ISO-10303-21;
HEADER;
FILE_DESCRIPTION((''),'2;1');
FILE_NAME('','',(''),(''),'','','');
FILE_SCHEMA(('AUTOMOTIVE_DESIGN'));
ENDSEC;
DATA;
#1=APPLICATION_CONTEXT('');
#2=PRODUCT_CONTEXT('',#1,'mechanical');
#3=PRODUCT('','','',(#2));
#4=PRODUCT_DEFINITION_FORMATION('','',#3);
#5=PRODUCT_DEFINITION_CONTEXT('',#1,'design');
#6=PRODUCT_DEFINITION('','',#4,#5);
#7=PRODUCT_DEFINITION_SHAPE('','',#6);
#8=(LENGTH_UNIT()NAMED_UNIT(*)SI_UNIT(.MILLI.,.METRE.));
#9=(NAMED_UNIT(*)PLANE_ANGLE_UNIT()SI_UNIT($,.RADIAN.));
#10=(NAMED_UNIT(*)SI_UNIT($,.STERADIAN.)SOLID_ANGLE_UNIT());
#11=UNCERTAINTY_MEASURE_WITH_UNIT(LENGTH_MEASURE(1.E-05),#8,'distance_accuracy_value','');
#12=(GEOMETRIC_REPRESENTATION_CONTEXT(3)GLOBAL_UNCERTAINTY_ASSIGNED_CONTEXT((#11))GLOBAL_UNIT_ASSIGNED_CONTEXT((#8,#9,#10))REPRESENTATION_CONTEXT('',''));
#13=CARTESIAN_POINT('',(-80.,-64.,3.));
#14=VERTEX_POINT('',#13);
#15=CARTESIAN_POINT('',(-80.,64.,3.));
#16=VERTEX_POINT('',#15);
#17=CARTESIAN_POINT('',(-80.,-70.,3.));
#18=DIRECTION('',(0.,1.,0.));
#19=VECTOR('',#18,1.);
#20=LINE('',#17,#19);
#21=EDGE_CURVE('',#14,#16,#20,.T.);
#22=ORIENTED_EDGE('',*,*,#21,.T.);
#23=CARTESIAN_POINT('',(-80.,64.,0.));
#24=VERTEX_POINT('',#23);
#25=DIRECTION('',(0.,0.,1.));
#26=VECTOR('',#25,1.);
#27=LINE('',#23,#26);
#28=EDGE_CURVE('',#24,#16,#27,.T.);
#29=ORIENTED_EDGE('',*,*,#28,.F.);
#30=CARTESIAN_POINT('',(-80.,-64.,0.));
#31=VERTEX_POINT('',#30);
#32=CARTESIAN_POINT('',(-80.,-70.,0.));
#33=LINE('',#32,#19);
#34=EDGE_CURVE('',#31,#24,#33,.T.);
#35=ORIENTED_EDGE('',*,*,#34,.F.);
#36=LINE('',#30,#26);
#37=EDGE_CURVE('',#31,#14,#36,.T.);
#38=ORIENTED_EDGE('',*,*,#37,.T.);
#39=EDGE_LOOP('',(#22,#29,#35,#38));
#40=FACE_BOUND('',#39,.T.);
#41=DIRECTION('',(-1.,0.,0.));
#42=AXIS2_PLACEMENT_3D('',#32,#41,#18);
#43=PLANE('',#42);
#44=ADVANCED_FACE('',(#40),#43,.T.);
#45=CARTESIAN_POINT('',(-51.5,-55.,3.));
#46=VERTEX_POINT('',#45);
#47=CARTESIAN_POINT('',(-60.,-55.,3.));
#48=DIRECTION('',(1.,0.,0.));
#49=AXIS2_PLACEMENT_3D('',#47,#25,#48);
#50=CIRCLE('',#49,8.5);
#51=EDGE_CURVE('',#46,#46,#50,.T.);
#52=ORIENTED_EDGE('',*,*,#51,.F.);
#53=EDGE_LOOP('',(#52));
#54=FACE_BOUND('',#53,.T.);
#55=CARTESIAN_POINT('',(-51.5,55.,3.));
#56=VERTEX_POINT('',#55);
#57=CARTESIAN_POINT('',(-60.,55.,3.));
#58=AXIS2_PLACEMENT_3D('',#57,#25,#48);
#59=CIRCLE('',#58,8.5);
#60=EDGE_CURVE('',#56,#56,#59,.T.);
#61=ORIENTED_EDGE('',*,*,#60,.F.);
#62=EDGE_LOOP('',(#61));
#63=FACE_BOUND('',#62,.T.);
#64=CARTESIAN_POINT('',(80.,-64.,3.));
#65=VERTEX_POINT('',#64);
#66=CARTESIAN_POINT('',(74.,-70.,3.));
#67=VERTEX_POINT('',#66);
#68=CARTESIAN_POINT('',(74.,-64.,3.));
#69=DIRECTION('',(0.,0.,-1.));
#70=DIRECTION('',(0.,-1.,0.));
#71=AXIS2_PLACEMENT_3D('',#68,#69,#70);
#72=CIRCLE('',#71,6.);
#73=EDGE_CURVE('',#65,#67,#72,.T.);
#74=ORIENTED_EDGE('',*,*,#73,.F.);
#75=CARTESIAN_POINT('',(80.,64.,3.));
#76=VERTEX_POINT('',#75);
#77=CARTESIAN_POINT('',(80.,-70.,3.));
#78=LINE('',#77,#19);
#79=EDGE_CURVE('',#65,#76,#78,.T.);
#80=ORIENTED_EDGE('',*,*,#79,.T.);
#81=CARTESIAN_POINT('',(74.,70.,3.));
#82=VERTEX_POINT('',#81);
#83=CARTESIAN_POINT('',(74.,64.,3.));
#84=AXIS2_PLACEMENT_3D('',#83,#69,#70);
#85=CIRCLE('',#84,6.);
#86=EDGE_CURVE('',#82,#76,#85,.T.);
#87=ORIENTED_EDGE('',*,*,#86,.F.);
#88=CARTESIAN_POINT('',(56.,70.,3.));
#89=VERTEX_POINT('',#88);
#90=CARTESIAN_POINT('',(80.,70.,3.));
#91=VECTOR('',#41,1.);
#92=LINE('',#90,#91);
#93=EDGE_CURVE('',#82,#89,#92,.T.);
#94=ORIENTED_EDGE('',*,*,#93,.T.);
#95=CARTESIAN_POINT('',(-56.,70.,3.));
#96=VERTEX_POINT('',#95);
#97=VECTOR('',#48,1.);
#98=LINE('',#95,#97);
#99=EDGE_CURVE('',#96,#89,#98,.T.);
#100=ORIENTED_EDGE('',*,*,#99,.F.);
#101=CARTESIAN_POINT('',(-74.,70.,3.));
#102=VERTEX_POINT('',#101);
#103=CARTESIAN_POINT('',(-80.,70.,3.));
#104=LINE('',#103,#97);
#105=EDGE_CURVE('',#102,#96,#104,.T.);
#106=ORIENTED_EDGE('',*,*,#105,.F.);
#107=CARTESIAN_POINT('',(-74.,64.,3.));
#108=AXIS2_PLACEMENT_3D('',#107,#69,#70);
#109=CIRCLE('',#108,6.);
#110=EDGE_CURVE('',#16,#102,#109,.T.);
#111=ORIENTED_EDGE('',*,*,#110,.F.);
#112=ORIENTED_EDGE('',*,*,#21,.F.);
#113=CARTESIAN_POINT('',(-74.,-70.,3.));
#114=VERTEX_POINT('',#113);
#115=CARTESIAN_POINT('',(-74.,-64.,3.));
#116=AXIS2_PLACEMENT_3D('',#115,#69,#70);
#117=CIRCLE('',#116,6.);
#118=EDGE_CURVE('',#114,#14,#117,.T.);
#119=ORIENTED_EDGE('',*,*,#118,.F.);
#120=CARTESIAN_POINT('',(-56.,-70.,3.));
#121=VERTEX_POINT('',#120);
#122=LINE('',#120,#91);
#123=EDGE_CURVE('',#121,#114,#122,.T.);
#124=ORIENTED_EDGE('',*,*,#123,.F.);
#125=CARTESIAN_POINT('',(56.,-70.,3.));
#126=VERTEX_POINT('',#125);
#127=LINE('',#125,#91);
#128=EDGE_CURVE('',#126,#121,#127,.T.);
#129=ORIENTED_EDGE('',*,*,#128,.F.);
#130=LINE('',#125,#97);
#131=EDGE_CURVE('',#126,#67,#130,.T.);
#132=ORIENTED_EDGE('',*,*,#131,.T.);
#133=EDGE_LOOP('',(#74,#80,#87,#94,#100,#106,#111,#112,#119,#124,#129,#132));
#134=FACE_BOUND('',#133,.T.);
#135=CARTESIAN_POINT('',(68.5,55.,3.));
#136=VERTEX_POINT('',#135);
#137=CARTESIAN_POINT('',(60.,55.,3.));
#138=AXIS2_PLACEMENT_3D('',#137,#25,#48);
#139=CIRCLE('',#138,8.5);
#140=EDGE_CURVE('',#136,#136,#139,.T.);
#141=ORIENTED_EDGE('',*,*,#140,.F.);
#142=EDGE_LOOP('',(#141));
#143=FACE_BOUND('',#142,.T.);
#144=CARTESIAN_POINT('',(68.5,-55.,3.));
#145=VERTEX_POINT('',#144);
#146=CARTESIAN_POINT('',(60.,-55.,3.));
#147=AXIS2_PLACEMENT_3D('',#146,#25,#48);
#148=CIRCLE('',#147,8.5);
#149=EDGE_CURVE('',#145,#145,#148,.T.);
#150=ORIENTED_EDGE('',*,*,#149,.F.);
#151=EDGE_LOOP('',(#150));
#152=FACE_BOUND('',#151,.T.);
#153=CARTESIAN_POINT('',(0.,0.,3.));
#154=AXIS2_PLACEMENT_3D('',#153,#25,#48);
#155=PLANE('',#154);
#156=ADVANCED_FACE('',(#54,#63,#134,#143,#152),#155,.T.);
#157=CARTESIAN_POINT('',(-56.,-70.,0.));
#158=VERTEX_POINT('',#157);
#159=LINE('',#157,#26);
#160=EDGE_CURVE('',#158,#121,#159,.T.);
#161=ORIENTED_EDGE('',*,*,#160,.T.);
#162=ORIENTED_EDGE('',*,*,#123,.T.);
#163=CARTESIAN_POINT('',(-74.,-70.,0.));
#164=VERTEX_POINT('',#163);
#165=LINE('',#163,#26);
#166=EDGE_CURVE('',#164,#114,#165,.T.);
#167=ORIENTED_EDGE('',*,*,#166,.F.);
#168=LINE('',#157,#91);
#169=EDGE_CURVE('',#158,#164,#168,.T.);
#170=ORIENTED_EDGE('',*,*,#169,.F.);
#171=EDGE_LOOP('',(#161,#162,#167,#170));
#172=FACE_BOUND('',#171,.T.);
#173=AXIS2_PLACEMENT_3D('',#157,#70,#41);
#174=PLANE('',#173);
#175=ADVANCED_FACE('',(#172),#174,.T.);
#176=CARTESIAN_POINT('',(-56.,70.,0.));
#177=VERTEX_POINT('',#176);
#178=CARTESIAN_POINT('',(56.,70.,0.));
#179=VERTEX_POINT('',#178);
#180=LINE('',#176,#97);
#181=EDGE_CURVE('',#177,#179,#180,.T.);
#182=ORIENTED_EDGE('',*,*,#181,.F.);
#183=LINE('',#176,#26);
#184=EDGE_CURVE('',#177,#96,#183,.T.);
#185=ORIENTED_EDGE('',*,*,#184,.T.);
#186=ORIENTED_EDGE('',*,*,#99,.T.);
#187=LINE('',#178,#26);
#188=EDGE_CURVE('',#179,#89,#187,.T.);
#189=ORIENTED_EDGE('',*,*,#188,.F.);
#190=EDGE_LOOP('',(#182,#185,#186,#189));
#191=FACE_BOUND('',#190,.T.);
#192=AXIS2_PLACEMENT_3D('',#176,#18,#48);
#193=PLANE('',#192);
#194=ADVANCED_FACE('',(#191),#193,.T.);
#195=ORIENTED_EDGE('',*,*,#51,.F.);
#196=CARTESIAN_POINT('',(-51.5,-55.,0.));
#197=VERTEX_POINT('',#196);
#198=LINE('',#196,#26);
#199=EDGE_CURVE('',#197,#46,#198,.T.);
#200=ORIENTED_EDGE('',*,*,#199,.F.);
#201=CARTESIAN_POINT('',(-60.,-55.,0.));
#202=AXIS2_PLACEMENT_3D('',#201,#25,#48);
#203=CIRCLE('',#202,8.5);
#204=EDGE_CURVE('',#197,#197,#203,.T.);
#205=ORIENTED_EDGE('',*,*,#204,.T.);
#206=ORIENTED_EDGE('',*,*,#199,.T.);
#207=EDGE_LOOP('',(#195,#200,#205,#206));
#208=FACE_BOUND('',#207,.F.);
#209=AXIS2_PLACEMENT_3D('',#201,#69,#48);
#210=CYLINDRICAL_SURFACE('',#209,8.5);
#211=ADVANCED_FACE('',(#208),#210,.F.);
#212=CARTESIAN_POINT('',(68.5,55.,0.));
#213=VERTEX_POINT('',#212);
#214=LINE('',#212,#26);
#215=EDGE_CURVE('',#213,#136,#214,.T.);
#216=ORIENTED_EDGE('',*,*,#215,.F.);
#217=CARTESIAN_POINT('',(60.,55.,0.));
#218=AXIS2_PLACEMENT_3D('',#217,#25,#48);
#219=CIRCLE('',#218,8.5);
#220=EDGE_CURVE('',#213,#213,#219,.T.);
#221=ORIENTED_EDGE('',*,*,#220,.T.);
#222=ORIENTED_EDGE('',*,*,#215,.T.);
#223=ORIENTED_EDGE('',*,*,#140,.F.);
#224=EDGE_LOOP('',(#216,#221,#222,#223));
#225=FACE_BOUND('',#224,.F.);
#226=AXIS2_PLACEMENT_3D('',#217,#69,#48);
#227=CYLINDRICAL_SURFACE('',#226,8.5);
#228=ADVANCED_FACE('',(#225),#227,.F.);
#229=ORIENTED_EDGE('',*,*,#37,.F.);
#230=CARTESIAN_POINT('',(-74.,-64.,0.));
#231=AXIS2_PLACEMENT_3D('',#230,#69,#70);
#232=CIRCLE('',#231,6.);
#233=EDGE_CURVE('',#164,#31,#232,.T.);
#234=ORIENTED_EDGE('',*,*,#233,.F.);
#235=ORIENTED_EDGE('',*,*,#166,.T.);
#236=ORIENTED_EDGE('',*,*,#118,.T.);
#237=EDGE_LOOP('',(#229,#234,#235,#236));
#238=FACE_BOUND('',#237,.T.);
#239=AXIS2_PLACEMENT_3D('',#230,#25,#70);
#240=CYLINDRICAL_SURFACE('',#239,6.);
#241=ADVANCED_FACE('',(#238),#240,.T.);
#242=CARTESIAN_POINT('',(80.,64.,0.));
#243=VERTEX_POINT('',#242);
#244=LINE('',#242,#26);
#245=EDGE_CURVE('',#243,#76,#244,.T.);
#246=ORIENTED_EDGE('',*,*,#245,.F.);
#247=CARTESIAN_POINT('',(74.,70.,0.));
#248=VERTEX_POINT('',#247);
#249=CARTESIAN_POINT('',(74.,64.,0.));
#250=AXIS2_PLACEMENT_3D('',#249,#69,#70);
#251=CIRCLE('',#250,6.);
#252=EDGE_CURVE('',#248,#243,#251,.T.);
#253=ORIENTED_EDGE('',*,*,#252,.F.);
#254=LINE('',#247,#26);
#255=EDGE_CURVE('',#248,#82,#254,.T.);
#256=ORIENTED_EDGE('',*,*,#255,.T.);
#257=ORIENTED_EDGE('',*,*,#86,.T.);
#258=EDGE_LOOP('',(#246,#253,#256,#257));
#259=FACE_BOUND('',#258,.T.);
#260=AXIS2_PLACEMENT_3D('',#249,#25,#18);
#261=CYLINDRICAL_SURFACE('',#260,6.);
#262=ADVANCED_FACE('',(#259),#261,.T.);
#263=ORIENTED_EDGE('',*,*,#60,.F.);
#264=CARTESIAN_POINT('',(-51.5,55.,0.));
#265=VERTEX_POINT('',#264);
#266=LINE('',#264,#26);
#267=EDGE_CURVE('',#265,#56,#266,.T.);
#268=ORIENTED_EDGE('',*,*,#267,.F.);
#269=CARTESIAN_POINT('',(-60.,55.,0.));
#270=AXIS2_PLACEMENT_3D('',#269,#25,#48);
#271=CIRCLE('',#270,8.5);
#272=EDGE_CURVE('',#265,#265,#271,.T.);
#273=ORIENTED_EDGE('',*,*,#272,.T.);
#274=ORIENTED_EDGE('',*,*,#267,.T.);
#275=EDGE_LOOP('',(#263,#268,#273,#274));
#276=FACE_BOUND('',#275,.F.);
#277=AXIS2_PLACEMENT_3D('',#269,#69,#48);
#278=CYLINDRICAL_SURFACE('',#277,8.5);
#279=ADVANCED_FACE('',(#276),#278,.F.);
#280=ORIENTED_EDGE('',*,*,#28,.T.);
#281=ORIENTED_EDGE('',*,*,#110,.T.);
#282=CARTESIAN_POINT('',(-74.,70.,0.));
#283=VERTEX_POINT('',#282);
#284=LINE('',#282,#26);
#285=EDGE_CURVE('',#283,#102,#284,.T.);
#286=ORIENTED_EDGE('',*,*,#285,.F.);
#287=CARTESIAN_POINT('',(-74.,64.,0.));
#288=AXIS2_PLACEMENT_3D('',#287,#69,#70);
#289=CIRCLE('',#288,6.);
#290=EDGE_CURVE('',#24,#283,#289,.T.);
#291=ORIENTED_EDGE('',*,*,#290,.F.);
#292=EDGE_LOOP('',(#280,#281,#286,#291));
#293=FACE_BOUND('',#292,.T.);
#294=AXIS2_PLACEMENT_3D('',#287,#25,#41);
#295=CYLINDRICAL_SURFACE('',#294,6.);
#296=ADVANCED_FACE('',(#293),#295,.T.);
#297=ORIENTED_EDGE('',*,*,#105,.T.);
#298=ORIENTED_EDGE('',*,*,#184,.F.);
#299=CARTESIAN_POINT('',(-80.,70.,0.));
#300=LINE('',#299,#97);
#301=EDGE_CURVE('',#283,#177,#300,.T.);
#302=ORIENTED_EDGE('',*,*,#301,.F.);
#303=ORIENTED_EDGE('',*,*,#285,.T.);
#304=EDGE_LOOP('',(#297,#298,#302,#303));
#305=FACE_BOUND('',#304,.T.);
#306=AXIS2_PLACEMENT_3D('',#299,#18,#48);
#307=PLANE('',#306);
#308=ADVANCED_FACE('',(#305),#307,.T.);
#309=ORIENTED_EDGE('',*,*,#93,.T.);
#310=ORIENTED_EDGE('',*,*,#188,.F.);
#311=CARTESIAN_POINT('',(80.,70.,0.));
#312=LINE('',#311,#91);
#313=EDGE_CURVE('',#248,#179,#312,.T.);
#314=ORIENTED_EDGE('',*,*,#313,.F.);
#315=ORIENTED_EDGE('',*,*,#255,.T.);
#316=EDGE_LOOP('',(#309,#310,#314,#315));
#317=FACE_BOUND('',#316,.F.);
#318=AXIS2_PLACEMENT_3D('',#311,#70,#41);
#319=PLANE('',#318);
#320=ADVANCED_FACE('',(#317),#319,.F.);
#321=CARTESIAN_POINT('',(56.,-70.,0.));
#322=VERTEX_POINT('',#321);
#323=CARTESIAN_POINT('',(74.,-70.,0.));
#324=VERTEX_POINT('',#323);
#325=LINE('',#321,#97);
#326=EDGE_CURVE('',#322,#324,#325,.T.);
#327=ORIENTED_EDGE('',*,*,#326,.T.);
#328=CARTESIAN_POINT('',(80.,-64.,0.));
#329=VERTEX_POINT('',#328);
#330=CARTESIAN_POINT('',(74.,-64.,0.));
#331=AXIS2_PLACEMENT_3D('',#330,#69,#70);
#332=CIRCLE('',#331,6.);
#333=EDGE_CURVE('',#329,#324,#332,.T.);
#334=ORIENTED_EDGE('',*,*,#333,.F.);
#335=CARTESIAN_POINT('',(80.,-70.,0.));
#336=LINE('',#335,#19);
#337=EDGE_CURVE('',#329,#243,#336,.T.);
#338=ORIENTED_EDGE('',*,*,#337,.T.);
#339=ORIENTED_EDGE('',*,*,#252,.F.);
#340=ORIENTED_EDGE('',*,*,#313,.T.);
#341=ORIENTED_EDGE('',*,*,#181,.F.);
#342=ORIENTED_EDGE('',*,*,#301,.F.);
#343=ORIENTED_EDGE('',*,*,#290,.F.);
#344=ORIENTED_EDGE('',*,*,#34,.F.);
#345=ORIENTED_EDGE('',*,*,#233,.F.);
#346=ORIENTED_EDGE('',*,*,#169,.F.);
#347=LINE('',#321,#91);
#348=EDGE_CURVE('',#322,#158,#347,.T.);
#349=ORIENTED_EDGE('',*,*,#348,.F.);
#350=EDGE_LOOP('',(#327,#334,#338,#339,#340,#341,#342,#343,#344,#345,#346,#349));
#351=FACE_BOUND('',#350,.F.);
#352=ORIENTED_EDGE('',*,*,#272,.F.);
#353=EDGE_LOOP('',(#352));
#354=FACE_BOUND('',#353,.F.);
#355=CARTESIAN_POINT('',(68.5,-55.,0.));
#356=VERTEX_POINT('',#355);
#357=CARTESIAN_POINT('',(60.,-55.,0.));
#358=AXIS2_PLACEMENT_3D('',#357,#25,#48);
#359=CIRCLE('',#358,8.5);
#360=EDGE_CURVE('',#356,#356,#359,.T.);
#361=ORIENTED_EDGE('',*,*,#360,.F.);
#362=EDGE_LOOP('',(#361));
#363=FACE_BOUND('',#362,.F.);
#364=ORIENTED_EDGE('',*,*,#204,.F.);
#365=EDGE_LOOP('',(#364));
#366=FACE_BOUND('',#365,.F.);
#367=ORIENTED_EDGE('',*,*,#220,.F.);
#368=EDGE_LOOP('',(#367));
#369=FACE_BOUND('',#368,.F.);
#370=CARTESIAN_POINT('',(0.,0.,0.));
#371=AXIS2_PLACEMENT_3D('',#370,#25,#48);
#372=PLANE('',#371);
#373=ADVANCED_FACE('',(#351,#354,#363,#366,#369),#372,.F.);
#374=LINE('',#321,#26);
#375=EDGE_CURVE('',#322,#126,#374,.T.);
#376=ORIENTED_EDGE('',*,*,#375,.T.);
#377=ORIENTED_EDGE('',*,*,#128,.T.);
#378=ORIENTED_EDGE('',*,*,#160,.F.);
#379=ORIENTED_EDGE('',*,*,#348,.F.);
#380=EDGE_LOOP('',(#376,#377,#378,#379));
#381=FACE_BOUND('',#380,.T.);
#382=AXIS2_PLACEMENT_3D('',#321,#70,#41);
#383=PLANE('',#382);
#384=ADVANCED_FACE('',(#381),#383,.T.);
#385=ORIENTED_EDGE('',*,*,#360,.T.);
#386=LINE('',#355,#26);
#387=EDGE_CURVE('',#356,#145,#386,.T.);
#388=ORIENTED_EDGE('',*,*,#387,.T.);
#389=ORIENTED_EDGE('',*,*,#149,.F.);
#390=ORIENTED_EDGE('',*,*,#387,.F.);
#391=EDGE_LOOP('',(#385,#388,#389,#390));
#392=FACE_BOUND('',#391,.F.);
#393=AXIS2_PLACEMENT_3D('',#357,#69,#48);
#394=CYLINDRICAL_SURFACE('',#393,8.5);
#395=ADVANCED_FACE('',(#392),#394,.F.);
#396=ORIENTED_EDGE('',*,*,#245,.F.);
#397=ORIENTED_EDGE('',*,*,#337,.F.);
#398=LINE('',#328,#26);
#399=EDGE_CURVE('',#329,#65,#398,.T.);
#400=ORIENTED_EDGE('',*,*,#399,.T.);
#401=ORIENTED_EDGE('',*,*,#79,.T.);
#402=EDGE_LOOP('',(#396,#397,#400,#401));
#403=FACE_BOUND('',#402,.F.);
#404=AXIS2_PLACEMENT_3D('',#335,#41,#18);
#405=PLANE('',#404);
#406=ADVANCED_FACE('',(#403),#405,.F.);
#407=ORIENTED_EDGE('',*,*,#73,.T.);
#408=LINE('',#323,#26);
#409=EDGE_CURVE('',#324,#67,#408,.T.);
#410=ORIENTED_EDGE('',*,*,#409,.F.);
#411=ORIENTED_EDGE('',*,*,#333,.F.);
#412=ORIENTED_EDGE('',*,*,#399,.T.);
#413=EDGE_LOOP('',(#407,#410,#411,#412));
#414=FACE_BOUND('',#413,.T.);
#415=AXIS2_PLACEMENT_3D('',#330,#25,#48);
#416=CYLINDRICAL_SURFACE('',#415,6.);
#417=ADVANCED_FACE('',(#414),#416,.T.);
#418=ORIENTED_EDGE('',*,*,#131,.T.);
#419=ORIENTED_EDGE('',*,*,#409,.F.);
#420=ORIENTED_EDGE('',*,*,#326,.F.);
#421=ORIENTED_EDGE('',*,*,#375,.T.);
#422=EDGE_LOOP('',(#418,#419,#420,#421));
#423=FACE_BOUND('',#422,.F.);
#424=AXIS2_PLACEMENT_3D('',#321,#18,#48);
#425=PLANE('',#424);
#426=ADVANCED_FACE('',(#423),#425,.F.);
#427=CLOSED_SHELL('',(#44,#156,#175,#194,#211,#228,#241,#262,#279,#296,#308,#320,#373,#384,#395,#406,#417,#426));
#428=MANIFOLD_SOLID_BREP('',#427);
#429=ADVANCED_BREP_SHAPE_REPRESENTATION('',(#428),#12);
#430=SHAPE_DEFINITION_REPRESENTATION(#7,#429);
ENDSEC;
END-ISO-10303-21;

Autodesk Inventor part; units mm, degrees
ref_plane "YZ Plane" through (0, 0, 0) normal (1, 0, 0) x (0, 1, 0)
ref_plane "XZ Plane" through (0, 0, 0) normal (0, 1, 0) x (-1, 0, 0)
ref_plane "XY Plane" through (0, 0, 0) normal (0, 0, 1) x (1, 0, 0)
sketch3d "3D Sketch1"
sketch "Sketch1" plane through (0, 0, 0) normal (0, 0, 1) x (1, 0, 0)
  line L0 (-56, 70) -> (56, 70)
  line L1 (56, 70) -> (56, -70) construction
  line L2 (56, -70) -> (-56, -70)
  line L3 (-56, -70) -> (-56, 70) construction
  line L4 (-56, 70) -> (56, -70) construction
  line L5 (56, 70) -> (-56, -70) construction
  line L6 (56, -70) -> (80, -70)
  line L7 (80, -70) -> (80, 70)
  line L8 (80, 70) -> (56, 70)
  line L9 (-56, -70) -> (-80, -70)
  line L10 (-80, -70) -> (-80, 70)
  line L11 (-80, 70) -> (-56, 70)
  circle A0 centre (60, -55) radius 8.5
  circle A1 centre (60, 55) radius 8.5
  circle A2 centre (-60, -55) radius 8.5
  circle A3 centre (-60, 55) radius 8.5
  line L12 (0, -70) -> (0, 70) construction
  line L13 (80, 0) -> (-80, 0) construction
  point P0 (0, 0)
  dimension "d30" = 140
  dimension "d34" = 160
  dimension "d35" = 17
  dimension "d36" = 20
  dimension "d37" = 15
extrude "Plate1" add sketch "Sketch1" along normal blind 3
fillet "Corner Round1" radius 6 4 edges at (80, 70, 1.5) (-80, 70, 1.5) (-80, -70, 1.5) (80, -70, 1.5)
equation "\"d6\" = Thickness"
equation "\"BendReliefWidth\" = Thickness"
equation "\"BendReliefDepth\" = 0.5 * Thickness"
equation "\"CornerReliefSize\" = 4 * Thickness"
equation "\"MinimumRemnant\" = 2 * Thickness"
equation "\"TransitionRadius\" = BendRadius"
equation "\"JacobiRadiusSize\" = BendRadius"
equation "\"GapSize\" = Thickness"
equation "\"Thickness\" = 3"
equation "\"BendRadius\" = 5"
properties part number "MSC 081 pillar 1" material "Stainless Steel"
